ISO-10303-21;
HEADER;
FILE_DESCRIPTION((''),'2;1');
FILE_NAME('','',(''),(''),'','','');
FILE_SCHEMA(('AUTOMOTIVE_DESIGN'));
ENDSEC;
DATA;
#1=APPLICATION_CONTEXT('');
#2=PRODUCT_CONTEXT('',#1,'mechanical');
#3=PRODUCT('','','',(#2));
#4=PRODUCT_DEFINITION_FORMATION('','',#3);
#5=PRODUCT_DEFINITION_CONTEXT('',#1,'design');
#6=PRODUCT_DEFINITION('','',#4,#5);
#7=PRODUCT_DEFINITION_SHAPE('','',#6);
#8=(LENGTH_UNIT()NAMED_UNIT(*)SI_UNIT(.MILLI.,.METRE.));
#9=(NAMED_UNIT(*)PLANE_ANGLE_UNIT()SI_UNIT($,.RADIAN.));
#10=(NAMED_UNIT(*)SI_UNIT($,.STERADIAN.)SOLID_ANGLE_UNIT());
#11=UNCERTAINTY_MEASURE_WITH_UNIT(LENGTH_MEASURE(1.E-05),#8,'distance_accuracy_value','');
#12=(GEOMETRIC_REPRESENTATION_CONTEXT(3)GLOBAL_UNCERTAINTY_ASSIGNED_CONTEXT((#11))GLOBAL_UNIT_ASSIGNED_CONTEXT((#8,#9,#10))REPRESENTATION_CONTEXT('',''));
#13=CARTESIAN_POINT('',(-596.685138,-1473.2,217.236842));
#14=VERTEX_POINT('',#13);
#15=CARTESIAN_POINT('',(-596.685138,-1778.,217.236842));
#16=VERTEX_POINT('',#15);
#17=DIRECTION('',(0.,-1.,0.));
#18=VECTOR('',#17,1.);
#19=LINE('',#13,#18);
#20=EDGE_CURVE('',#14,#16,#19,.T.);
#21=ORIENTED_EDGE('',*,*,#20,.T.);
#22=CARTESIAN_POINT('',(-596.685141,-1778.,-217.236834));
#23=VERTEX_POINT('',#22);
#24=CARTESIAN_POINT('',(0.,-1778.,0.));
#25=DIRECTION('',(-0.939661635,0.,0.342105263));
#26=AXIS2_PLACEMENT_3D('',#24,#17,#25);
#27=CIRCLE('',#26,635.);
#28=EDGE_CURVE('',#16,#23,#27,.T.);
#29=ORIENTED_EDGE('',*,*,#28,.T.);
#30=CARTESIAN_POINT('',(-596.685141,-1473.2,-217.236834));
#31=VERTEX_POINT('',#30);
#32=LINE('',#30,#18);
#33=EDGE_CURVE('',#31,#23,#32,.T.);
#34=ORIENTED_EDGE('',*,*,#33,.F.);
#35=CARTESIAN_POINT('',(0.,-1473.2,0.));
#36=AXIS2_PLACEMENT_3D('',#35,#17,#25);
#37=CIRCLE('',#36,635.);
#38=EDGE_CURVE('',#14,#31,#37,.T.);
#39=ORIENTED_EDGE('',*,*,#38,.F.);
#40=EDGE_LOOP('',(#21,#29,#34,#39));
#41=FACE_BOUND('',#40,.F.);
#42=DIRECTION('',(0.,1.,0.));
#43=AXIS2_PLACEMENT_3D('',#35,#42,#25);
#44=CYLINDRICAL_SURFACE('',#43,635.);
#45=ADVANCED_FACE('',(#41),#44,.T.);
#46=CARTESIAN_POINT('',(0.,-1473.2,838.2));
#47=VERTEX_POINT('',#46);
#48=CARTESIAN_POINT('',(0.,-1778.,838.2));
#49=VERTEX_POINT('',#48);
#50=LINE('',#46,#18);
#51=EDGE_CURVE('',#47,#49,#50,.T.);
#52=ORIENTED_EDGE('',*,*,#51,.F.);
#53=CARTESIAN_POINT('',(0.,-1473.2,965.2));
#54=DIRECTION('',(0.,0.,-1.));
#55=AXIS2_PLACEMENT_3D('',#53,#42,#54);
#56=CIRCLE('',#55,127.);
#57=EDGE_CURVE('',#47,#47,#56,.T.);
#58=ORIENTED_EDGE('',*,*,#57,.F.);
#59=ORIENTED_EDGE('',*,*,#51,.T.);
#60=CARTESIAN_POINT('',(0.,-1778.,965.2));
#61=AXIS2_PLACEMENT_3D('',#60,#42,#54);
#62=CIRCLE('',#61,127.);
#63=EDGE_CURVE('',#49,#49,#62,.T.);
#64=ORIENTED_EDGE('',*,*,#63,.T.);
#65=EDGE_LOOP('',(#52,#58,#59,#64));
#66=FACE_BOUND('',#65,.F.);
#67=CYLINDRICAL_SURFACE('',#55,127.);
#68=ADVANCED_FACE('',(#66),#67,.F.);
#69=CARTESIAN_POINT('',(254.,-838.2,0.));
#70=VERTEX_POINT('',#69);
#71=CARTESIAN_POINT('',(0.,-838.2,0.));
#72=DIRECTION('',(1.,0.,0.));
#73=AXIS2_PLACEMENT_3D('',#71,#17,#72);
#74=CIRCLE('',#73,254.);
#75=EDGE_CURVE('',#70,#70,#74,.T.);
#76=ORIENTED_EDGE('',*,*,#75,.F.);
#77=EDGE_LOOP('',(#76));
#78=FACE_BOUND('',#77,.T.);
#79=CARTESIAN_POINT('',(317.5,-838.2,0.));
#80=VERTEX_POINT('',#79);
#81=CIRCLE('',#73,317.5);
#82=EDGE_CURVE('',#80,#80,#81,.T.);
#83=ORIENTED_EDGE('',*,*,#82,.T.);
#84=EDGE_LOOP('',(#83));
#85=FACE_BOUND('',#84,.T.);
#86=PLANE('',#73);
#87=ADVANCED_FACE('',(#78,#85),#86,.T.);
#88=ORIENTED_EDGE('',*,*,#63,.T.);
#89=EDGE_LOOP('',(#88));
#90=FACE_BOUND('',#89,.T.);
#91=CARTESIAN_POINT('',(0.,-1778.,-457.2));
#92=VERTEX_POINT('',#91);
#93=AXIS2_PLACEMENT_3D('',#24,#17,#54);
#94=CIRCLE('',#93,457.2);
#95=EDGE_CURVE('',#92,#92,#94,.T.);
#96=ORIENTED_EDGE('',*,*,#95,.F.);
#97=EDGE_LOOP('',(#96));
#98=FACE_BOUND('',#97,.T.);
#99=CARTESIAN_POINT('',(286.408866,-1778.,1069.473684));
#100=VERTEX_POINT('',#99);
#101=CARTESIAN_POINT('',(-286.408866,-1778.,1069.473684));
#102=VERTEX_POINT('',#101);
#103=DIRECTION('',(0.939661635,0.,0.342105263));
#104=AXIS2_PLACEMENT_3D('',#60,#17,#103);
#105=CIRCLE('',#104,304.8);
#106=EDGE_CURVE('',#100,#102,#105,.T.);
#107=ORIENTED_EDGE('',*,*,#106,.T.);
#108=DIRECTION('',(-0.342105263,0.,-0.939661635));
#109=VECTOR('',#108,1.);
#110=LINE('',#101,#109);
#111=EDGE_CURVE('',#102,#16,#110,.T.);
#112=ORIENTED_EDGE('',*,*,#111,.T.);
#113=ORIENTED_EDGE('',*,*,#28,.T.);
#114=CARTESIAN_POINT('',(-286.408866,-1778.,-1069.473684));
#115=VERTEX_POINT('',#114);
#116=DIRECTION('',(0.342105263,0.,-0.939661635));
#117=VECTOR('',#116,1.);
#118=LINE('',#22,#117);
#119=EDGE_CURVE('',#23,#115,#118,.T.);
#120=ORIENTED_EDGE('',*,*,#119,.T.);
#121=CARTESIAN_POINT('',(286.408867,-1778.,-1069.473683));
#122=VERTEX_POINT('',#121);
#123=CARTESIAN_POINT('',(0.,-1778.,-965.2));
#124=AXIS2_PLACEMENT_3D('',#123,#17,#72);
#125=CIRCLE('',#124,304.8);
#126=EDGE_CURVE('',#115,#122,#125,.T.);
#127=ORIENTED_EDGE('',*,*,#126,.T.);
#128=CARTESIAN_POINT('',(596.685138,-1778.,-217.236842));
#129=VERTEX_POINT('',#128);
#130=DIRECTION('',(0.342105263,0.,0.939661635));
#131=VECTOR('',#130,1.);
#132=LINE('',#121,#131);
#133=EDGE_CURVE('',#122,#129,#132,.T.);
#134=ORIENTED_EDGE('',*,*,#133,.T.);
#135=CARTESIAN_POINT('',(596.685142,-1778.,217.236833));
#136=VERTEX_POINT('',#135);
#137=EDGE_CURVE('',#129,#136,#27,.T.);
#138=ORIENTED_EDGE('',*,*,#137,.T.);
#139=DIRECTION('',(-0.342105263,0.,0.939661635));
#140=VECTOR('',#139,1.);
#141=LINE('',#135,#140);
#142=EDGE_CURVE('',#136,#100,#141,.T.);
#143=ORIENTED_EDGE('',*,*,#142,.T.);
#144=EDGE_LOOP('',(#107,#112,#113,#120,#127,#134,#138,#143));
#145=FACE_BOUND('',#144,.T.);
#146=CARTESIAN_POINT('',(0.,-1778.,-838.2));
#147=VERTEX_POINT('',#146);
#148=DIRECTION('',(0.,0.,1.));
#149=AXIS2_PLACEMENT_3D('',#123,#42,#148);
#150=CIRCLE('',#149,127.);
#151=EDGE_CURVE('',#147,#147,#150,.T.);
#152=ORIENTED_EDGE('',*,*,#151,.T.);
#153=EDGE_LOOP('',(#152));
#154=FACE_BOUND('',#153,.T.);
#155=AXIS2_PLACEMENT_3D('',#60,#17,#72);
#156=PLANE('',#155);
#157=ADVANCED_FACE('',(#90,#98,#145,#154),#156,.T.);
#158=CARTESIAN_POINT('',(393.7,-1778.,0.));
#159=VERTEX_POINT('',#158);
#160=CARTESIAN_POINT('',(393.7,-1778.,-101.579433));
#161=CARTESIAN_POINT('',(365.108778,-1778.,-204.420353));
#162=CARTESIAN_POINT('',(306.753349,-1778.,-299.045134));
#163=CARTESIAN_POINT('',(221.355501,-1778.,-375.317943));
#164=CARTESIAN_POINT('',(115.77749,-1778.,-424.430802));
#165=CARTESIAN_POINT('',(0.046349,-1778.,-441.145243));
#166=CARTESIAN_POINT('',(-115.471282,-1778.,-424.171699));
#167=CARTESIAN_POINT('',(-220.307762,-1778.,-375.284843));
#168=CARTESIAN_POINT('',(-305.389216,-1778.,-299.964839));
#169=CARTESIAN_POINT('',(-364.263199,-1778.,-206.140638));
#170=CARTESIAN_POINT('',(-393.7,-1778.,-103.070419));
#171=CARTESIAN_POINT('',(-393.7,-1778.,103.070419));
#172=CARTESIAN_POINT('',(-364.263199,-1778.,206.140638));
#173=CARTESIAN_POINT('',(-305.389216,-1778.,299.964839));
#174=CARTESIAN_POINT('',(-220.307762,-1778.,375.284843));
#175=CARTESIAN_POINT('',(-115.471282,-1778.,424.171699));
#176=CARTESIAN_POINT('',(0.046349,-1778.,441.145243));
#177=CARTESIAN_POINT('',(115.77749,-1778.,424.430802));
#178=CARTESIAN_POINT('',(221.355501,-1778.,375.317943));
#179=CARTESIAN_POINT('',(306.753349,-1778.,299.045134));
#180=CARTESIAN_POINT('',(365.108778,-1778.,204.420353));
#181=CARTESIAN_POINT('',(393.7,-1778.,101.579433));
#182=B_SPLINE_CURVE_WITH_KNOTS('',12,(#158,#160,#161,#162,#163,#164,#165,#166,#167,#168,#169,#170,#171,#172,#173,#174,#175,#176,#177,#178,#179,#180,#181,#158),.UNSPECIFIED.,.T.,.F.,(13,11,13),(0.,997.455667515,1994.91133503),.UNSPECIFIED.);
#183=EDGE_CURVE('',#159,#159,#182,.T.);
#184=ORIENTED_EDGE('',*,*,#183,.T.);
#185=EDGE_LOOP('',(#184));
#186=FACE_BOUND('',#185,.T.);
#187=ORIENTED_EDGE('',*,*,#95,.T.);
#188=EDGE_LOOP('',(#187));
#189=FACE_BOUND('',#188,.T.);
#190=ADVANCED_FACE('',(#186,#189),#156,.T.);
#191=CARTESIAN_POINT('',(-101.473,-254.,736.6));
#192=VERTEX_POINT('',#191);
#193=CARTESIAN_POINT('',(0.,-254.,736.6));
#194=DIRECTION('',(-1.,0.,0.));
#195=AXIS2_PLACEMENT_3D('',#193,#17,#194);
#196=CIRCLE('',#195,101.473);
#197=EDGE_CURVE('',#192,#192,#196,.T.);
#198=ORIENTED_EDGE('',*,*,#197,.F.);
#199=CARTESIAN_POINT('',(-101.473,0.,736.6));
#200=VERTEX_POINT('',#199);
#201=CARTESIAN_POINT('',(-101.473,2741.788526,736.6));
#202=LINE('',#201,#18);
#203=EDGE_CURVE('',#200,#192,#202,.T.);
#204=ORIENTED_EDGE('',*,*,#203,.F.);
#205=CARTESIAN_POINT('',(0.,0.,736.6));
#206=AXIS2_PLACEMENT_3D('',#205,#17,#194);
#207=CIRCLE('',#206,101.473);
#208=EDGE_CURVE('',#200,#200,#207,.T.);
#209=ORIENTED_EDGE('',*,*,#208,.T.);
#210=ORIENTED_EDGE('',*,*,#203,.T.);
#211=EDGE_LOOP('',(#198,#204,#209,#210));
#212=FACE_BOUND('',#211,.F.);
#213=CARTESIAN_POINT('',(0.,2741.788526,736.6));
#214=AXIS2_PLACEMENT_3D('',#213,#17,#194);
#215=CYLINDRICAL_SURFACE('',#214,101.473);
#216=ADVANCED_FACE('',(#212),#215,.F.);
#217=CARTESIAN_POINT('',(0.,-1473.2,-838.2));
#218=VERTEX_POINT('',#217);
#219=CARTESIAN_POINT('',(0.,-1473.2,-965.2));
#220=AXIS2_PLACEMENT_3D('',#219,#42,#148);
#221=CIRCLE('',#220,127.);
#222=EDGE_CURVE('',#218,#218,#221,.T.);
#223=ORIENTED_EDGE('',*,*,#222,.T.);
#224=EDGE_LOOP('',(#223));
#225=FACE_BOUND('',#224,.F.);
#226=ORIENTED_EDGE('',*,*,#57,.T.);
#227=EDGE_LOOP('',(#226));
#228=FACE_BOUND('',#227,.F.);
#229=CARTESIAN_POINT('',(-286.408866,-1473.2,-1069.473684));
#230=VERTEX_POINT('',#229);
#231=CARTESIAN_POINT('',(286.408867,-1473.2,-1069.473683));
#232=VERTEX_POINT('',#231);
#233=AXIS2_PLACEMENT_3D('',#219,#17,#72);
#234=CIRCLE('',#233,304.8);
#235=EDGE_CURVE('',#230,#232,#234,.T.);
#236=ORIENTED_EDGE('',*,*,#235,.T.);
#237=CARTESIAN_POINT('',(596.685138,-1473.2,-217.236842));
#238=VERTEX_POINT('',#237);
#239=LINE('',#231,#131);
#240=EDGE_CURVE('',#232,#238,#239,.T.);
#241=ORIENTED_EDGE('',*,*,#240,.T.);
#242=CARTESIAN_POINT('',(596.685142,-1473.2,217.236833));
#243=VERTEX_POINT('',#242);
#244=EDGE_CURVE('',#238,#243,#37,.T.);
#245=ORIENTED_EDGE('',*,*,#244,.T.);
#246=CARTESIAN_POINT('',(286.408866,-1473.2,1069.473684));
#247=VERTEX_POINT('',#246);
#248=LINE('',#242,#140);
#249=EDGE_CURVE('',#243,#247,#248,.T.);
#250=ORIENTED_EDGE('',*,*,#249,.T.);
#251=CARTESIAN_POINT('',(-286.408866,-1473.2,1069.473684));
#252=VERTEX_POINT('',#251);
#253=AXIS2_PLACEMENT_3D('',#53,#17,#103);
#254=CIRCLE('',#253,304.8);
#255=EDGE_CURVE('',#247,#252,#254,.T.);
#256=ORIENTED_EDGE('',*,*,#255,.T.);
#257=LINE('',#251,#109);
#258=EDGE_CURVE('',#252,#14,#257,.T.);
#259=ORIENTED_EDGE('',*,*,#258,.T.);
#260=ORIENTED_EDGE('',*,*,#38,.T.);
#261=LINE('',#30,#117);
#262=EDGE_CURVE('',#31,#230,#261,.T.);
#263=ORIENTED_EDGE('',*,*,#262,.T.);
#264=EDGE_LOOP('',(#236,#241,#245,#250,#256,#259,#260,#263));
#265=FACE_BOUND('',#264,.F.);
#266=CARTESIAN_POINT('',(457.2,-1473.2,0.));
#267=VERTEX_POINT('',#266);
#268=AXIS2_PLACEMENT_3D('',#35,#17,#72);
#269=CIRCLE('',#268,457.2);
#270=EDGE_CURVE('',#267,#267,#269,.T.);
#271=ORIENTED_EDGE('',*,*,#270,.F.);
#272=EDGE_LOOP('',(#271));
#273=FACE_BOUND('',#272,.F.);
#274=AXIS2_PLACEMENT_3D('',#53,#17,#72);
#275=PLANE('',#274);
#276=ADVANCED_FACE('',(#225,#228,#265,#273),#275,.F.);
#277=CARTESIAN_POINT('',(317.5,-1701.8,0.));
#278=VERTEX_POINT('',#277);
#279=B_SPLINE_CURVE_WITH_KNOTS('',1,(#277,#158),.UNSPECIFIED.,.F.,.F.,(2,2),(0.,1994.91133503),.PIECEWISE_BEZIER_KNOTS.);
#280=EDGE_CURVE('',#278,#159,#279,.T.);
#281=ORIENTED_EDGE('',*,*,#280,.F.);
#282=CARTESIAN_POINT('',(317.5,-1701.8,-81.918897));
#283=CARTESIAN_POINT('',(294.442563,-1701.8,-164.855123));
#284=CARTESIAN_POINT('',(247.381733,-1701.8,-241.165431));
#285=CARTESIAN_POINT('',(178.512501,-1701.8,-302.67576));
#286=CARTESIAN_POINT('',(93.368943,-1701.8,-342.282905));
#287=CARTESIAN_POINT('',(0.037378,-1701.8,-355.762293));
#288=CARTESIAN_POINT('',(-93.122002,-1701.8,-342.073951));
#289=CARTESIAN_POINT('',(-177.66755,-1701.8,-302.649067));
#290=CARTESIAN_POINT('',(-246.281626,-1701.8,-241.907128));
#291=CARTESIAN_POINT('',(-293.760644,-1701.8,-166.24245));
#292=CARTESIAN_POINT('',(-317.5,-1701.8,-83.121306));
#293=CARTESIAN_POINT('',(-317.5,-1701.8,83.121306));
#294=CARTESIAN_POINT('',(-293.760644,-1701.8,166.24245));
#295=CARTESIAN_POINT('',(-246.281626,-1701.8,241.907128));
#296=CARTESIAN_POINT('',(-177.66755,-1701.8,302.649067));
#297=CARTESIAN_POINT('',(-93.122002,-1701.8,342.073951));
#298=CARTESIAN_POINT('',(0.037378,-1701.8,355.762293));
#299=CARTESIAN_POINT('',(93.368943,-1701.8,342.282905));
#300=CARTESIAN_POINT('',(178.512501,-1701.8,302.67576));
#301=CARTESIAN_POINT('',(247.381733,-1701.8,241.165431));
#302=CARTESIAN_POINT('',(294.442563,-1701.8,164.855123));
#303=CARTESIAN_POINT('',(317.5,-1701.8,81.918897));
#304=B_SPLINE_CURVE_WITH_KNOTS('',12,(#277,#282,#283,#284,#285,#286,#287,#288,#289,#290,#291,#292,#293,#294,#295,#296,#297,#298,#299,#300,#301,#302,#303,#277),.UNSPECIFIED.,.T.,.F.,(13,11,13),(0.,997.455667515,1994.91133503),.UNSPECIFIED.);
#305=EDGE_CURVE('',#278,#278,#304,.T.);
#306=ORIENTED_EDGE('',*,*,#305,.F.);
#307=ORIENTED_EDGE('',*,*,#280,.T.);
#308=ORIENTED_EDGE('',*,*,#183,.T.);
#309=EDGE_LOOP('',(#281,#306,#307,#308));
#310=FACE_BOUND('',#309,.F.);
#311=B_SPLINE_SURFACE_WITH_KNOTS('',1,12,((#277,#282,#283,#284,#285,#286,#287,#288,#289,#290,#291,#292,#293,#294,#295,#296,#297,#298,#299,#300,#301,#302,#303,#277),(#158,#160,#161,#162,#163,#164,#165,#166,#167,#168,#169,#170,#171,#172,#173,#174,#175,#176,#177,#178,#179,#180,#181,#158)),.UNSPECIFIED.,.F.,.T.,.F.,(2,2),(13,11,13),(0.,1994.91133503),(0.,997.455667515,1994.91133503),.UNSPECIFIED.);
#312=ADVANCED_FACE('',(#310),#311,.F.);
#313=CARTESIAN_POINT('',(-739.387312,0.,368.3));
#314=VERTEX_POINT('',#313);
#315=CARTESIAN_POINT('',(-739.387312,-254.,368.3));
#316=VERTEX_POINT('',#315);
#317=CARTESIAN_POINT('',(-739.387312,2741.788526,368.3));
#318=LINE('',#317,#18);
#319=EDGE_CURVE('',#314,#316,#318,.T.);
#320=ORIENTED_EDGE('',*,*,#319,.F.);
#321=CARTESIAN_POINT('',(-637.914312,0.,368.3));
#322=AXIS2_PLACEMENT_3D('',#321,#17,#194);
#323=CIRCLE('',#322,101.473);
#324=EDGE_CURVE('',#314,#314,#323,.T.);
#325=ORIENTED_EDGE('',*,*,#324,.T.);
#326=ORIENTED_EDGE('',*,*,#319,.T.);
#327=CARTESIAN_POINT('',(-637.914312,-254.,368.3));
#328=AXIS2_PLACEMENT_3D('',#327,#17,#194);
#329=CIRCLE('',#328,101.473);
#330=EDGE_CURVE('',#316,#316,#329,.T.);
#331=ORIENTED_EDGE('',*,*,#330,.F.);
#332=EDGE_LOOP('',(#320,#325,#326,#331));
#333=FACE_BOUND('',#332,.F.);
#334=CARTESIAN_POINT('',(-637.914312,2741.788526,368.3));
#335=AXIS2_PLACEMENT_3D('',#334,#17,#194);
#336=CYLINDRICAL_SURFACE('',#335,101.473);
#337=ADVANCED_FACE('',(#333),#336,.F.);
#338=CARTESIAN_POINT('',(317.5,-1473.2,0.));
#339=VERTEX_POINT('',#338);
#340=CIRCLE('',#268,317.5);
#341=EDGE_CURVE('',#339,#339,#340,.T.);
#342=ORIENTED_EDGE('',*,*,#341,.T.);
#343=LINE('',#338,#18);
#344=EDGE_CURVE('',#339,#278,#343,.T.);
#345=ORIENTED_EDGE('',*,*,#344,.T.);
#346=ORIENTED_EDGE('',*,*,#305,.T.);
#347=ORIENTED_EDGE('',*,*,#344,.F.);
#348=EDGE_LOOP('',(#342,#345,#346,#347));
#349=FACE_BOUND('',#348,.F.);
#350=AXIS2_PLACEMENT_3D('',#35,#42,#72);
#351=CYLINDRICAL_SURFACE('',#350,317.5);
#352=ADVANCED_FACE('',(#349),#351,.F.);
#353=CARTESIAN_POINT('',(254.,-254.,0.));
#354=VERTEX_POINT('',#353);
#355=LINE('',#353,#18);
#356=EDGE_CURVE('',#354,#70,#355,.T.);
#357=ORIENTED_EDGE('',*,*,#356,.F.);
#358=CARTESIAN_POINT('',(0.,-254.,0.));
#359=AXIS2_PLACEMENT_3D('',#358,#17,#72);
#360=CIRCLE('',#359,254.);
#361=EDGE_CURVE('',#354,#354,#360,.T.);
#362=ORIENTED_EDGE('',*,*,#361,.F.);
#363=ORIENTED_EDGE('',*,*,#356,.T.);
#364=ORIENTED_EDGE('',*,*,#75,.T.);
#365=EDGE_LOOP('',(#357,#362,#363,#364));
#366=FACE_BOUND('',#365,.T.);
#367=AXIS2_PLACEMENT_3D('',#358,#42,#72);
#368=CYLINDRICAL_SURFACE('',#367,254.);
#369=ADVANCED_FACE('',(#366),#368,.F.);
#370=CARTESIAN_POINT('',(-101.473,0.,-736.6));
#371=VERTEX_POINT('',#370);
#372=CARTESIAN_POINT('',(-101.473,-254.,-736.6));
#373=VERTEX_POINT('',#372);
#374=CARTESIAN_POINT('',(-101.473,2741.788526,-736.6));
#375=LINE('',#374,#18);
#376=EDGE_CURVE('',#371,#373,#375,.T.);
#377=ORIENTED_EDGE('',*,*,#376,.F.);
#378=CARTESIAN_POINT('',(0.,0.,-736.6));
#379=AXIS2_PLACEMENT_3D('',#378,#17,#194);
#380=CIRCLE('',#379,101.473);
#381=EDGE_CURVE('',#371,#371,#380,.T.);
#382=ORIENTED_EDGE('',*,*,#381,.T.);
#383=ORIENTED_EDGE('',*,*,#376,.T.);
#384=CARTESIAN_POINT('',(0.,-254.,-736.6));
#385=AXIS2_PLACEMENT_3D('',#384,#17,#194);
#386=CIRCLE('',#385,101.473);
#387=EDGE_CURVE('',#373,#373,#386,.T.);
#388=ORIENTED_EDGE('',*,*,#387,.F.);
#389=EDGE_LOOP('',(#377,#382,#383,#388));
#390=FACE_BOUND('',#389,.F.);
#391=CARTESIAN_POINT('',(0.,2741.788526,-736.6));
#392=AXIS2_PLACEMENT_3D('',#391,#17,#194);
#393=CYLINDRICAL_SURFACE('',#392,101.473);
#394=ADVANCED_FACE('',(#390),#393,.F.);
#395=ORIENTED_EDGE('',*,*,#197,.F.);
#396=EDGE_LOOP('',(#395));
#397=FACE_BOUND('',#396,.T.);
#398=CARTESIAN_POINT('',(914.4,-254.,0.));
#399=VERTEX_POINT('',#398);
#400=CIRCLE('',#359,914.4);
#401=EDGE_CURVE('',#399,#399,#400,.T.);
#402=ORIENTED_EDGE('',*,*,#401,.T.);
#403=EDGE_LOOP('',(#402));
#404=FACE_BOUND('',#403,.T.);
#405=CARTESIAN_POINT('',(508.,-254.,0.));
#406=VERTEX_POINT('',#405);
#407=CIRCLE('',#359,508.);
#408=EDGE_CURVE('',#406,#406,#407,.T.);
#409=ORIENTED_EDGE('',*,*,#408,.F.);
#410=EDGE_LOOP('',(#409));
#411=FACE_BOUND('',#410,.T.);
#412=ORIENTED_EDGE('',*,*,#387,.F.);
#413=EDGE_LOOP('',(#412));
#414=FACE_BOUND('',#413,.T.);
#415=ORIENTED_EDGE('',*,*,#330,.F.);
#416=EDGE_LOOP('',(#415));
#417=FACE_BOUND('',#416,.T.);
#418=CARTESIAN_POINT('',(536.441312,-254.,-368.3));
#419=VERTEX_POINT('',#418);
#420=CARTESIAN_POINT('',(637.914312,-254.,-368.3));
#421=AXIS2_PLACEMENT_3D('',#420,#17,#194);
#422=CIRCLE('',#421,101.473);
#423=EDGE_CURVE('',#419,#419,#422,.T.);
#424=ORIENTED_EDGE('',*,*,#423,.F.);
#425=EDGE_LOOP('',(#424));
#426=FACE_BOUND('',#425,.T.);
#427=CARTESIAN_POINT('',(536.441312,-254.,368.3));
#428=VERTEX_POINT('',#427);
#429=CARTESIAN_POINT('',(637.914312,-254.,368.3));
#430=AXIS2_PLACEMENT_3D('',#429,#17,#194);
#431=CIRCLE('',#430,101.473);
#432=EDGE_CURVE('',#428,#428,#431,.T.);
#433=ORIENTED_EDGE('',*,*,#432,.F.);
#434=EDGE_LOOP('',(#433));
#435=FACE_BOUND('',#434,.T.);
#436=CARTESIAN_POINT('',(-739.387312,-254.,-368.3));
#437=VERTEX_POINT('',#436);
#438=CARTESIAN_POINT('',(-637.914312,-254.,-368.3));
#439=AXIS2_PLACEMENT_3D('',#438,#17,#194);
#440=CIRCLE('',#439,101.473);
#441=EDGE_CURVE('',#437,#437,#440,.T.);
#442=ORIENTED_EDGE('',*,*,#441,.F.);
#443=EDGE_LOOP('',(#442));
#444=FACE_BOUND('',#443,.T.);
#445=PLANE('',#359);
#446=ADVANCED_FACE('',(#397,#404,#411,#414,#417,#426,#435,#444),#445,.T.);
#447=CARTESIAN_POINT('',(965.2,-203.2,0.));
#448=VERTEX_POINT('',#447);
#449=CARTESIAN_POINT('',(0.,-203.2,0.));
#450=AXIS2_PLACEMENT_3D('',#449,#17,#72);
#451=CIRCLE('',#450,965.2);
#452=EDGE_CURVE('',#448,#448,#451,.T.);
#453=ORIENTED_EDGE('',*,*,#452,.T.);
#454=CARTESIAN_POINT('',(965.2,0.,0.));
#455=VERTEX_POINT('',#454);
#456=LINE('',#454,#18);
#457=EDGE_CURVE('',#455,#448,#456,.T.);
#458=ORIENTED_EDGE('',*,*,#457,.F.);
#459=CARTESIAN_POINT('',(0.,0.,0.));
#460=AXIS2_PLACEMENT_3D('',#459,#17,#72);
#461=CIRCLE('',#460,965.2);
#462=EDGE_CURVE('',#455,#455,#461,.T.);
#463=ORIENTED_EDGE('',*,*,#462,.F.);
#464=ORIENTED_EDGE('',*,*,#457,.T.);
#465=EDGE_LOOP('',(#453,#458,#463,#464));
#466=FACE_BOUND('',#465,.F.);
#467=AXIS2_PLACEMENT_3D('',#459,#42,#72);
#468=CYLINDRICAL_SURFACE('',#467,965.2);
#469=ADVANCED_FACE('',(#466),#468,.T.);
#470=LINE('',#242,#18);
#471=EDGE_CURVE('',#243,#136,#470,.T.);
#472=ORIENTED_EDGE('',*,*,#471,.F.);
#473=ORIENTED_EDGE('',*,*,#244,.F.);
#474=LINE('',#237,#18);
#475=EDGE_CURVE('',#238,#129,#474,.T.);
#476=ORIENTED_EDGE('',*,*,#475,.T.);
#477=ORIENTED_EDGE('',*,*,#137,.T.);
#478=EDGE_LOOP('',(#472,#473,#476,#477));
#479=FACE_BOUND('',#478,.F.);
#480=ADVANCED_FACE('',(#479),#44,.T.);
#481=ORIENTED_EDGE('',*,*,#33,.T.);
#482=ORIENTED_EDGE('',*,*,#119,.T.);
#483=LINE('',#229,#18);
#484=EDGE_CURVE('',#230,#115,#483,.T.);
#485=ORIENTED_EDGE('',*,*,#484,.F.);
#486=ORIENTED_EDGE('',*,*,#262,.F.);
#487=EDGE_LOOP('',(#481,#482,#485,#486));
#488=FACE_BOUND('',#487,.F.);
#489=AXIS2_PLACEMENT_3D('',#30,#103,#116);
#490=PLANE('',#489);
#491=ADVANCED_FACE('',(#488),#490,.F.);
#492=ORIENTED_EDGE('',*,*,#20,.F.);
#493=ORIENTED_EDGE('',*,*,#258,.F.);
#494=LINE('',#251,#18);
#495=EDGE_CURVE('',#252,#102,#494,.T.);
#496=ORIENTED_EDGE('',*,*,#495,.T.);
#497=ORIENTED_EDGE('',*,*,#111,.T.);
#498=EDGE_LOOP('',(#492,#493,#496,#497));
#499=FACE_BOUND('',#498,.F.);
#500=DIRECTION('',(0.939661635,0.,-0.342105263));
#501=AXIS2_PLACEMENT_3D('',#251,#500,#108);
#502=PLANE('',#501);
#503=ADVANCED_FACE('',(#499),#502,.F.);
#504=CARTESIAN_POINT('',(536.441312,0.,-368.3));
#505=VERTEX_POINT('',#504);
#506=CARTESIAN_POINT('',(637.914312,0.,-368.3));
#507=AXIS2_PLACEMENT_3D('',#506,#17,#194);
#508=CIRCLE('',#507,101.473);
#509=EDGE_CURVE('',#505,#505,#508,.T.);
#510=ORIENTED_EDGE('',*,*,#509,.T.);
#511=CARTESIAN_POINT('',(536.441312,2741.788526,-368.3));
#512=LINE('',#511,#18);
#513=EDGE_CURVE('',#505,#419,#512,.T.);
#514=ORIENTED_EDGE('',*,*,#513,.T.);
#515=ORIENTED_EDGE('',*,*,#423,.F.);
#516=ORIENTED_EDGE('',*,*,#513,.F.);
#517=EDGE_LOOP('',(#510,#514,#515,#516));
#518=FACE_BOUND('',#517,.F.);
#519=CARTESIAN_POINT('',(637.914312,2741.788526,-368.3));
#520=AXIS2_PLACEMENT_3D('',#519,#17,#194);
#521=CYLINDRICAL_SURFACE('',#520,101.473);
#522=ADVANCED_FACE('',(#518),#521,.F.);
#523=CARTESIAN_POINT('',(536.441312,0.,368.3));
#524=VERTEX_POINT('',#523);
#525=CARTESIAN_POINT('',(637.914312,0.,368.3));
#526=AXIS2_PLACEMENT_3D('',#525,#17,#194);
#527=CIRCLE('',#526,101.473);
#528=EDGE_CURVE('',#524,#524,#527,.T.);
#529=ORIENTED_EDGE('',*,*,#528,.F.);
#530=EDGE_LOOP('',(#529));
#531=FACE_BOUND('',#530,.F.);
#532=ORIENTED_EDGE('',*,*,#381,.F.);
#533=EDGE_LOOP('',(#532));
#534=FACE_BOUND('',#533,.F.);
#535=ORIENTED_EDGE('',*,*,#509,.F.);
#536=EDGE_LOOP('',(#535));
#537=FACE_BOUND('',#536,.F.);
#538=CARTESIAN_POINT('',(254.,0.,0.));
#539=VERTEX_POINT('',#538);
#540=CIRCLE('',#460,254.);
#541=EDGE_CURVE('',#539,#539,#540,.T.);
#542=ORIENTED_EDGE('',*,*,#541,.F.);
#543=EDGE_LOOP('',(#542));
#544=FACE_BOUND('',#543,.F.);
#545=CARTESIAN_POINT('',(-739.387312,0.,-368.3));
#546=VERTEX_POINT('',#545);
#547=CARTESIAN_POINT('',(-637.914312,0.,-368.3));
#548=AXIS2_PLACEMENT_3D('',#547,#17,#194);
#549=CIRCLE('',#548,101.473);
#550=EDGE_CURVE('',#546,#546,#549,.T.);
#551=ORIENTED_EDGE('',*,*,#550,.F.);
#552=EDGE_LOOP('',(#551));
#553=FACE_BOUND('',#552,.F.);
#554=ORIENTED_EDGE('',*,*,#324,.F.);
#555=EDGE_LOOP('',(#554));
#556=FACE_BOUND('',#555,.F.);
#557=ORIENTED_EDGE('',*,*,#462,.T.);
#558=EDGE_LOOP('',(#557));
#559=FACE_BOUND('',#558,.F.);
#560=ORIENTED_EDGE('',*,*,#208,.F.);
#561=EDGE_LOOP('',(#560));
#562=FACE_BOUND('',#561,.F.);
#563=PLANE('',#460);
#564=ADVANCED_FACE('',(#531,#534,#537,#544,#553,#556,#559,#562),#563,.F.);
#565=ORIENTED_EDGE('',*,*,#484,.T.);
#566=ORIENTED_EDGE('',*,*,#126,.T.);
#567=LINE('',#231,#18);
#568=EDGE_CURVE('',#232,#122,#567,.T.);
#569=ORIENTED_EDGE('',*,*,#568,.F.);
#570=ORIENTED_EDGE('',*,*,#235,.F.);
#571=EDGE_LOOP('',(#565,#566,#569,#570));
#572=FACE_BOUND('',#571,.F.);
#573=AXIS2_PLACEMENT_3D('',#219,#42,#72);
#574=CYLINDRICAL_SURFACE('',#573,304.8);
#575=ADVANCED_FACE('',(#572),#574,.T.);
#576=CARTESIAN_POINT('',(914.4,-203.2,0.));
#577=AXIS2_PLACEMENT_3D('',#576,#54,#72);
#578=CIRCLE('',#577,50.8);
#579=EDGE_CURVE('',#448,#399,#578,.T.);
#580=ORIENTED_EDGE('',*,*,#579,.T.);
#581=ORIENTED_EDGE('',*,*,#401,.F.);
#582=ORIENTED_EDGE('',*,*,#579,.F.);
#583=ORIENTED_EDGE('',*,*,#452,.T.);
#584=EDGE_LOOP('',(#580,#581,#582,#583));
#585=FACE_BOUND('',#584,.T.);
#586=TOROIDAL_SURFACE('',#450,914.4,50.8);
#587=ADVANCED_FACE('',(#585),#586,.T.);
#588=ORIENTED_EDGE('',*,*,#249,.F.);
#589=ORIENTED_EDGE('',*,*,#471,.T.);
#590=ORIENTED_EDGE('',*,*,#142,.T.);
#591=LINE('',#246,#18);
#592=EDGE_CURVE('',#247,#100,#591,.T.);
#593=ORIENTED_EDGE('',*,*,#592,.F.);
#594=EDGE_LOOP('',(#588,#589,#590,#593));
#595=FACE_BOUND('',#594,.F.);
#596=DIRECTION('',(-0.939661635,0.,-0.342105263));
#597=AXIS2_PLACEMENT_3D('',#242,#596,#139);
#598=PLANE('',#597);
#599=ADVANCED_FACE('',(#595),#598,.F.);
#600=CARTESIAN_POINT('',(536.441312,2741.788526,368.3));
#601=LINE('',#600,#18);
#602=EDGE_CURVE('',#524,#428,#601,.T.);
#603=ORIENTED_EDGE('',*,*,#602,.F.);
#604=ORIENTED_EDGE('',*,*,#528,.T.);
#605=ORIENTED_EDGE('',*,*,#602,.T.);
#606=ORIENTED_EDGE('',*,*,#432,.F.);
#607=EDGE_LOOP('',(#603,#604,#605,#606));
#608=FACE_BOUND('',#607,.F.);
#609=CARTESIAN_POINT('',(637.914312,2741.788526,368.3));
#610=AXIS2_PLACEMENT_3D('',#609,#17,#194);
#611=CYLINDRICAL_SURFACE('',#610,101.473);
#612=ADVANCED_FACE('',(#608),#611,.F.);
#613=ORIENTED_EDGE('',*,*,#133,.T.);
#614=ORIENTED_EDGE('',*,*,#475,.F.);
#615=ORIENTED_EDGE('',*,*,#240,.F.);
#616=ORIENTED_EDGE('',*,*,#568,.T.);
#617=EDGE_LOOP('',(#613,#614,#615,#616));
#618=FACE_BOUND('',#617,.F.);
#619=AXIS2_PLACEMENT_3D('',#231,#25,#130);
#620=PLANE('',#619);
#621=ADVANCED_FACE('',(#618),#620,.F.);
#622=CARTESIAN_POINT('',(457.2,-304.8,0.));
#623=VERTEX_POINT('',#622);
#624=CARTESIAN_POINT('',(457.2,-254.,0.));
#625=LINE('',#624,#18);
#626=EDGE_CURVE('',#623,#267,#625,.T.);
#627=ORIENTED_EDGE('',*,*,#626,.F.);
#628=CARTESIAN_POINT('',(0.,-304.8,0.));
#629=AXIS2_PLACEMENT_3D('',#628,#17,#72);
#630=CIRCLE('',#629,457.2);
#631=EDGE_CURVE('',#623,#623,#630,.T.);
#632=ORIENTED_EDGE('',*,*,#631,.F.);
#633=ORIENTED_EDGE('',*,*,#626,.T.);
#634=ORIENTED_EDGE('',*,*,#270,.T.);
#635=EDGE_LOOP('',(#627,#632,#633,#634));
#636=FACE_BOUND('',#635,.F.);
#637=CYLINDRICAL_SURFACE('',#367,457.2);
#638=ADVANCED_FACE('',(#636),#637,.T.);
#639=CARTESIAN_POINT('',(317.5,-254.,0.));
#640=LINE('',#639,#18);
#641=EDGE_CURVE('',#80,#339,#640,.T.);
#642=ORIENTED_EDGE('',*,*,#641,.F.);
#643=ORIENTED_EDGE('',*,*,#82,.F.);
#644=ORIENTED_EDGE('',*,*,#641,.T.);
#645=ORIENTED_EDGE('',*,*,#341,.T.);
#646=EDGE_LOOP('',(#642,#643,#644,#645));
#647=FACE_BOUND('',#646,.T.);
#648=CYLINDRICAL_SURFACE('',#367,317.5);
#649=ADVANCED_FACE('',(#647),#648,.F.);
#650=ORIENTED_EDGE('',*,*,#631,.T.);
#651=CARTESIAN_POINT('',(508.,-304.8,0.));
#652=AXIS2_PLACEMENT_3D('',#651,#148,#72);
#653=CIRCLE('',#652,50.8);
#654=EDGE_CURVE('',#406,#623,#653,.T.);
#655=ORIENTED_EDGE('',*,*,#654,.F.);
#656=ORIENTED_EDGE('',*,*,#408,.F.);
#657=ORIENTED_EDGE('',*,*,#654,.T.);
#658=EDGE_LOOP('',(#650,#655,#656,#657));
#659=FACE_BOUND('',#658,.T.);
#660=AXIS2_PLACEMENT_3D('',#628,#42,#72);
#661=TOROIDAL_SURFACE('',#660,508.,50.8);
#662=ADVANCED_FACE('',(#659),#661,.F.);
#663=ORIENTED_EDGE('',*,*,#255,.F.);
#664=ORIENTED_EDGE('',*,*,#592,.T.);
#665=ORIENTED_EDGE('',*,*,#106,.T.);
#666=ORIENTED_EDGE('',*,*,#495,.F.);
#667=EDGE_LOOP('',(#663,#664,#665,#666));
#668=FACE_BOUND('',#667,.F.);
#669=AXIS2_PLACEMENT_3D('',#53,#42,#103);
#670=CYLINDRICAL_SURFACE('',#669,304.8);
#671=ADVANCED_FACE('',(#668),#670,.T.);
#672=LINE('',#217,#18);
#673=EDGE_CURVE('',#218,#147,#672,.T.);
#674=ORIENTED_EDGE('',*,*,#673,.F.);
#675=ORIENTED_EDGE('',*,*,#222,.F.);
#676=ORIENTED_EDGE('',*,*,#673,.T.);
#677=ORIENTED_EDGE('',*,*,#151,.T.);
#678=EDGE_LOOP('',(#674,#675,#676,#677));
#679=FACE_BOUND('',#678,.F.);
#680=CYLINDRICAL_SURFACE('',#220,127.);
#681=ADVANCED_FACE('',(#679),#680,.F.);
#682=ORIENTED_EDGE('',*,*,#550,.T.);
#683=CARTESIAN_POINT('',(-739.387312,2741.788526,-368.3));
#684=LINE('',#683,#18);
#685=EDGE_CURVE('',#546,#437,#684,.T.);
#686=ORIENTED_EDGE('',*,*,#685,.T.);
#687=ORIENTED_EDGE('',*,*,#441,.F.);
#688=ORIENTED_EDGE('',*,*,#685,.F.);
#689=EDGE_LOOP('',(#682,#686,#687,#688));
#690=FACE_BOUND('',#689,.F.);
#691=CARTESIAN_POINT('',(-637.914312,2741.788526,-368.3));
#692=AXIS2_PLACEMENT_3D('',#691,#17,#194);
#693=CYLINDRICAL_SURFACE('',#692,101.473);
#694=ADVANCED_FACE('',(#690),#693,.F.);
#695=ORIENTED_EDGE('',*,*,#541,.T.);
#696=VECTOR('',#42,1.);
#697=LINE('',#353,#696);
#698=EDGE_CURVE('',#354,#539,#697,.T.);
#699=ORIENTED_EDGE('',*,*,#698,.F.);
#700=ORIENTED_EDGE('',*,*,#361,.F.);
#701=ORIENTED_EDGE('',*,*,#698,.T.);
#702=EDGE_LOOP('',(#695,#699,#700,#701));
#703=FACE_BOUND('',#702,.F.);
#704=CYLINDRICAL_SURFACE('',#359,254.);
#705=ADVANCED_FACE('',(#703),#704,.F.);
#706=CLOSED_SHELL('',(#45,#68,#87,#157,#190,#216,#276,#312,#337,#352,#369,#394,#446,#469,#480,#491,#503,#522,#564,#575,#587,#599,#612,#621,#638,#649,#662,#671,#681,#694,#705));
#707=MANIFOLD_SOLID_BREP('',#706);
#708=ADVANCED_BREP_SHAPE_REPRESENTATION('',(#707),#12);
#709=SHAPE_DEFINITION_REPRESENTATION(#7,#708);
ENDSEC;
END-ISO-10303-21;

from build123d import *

# Parameters (mm, degrees)
F0_R      = 965.2
F1_DEPTH  = 254
F2_D      = 202.946
F3_R      = 457.2
F3_R_2    = 317.5
F4_DEPTH  = 1219.2
F5_R      = 50.8
F3_R_3    = 254
F6_DEPTH  = 254.001
F7_DEPTH  = 584.2
F10_DEPTH = 304.8
F11_DEPTH = 304.8
F12_SIZE2 = 76.2
F12_SIZE  = 76.2


# Not quite as in the source:
# - a feature names something its author has since deleted; it is built from what else it names


with BuildPart() as f1:
    # F0 (on Front) → F1 (new body)
    with BuildSketch(Plane.XZ):
        Circle(F0_R)
        with BuildLine():
            ThreePointArc((682.5252094596, 277.017866666), (722.9549188186, 141.1231566967), (736.6, 0))
            ThreePointArc((736.6, 0), (722.9549188186, -141.1231566967), (682.5252094596, -277.017866666))
            ThreePointArc((682.5252094596, -277.017866666), (724.0973360995, -314.4943643214), (739.5143124276, -368.3))
            ThreePointArc((739.5143124276, -368.3), (685.6481824631, -457.9885592004), (581.1671145647, -452.5752367823))
            ThreePointArc((581.1671145647, -452.5752367823), (368.3, -637.9143124276), (101.3580948948, -729.5931034483))
            ThreePointArc((101.3580948949, -729.5931034483), (101.5395057141, -733.0944644715), (101.6, -736.6))
            ThreePointArc((101.6, -736.6), (-3.5055355285, -838.1395057141), (-101.3580948949, -729.5931034483))
            ThreePointArc((-101.3580948948, -729.5931034483), (-368.3, -637.9143124276), (-581.1671145647, -452.5752367823))
            ThreePointArc((-581.1671145647, -452.5752367823), (-725.9024934521, -419.1), (-682.5252094596, -277.017866666))
            ThreePointArc((-682.5252094596, -277.017866666), (-736.6, 0), (-682.5252094596, 277.017866666))
            ThreePointArc((-682.5252094596, 277.017866666), (-725.9024934521, 419.1), (-581.1671145647, 452.5752367823))
            ThreePointArc((-581.1671145647, 452.5752367823), (-368.3, 637.9143124276), (-101.3580948948, 729.5931034483))
            ThreePointArc((-101.3580948949, 729.5931034483), (-3.5055355285, 838.1395057141), (101.6, 736.6))
            ThreePointArc((101.6, 736.6), (101.5395057141, 733.0944644715), (101.3580948949, 729.5931034483))
            ThreePointArc((101.3580948948, 729.5931034483), (368.3, 637.9143124276), (581.1671145647, 452.5752367823))
            ThreePointArc((581.1671145647, 452.5752367823), (685.6481824631, 457.9885592004), (739.5143124276, 368.3))
            ThreePointArc((739.5143124276, 368.3), (724.0973360995, 314.4943643214), (682.5252094596, 277.017866666))
        make_face(mode=Mode.SUBTRACT)
        with BuildLine():
            ThreePointArc((682.5252094596, -277.017866666), (722.9549188186, -141.1231566967), (736.6, 0))
            ThreePointArc((736.6, 0), (722.9549188186, 141.1231566967), (682.5252094596, 277.017866666))
            ThreePointArc((682.5252094596, 277.017866666), (549.9261314031, 317.5), (581.1671145647, 452.5752367823))
            ThreePointArc((581.1671145647, 452.5752367823), (368.3, 637.9143124276), (101.3580948948, 729.5931034483))
            ThreePointArc((101.3580948949, 729.5931034483), (0, 635), (-101.3580948949, 729.5931034483))
            ThreePointArc((-101.3580948948, 729.5931034483), (-368.3, 637.9143124276), (-581.1671145647, 452.5752367823))
            ThreePointArc((-581.1671145647, 452.5752367823), (-548.2257532273, 416.0338700355), (-536.3143124276, 368.3))
            ThreePointArc((-536.3143124276, 368.3), (-584.108676749, 282.1169763282), (-682.5252094596, 277.017866666))
            ThreePointArc((-682.5252094596, 277.017866666), (-736.6, 0), (-682.5252094596, -277.017866666))
            ThreePointArc((-682.5252094596, -277.017866666), (-584.108676749, -282.1169763282), (-536.3143124276, -368.3))
            ThreePointArc((-536.3143124276, -368.3), (-548.2257532273, -416.0338700355), (-581.1671145647, -452.5752367823))
            ThreePointArc((-581.1671145647, -452.5752367823), (-368.3, -637.9143124276), (-101.3580948948, -729.5931034483))
            ThreePointArc((-101.3580948949, -729.5931034483), (0, -635), (101.3580948949, -729.5931034483))
            ThreePointArc((101.3580948948, -729.5931034483), (368.3, -637.9143124276), (581.1671145647, -452.5752367823))
            ThreePointArc((581.1671145647, -452.5752367823), (549.9261314031, -317.5), (682.5252094596, -277.017866666))
        make_face()
        with BuildLine():
            ThreePointArc((-682.5252094596, 277.017866666), (-637.9143124276, 368.3), (-581.1671145647, 452.5752367823))
            ThreePointArc((-581.1671145647, 452.5752367823), (-725.9024934521, 419.1), (-682.5252094596, 277.017866666))
        make_face()
        with BuildLine():
            ThreePointArc((-101.3580948948, 729.5931034483), (0, 736.6), (101.3580948948, 729.5931034483))
            ThreePointArc((101.3580948949, 729.5931034483), (101.5395057141, 733.0944644715), (101.6, 736.6))
            ThreePointArc((101.6, 736.6), (-3.5055355285, 838.1395057141), (-101.3580948949, 729.5931034483))
        make_face()
        with BuildLine():
            ThreePointArc((-682.5252094596, -277.017866666), (-725.9024934521, -419.1), (-581.1671145647, -452.5752367823))
            ThreePointArc((-581.1671145647, -452.5752367823), (-637.9143124276, -368.3), (-682.5252094596, -277.017866666))
        make_face()
        with BuildLine():
            ThreePointArc((101.6, -736.6), (101.5395057141, -733.0944644715), (101.3580948949, -729.5931034483))
            ThreePointArc((101.3580948948, -729.5931034483), (0, -736.6), (-101.3580948948, -729.5931034483))
            ThreePointArc((-101.3580948949, -729.5931034483), (-3.5055355285, -838.1395057141), (101.6, -736.6))
        make_face()
        with BuildLine():
            ThreePointArc((739.5143124276, -368.3), (724.0973360995, -314.4943643214), (682.5252094596, -277.017866666))
            ThreePointArc((682.5252094596, -277.017866666), (637.9143124276, -368.3), (581.1671145647, -452.5752367823))
            ThreePointArc((581.1671145647, -452.5752367823), (685.6481824631, -457.9885592004), (739.5143124276, -368.3))
        make_face()
        with BuildLine():
            ThreePointArc((581.1671145647, 452.5752367823), (637.9143124276, 368.3), (682.5252094596, 277.017866666))
            ThreePointArc((682.5252094596, 277.017866666), (724.0973360995, 314.4943643214), (739.5143124276, 368.3))
            ThreePointArc((739.5143124276, 368.3), (685.6481824631, 457.9885592004), (581.1671145647, 452.5752367823))
        make_face()
        with BuildLine():
            ThreePointArc((-536.3143124276, 368.3), (-548.2257532273, 416.0338700355), (-581.1671145647, 452.5752367823))
            ThreePointArc((-581.1671145647, 452.5752367823), (-637.9143124276, 368.3), (-682.5252094596, 277.017866666))
            ThreePointArc((-682.5252094596, 277.017866666), (-584.108676749, 282.1169763282), (-536.3143124276, 368.3))
        make_face()
        with BuildLine():
            ThreePointArc((-101.3580948949, 729.5931034483), (0, 635), (101.3580948949, 729.5931034483))
            ThreePointArc((101.3580948948, 729.5931034483), (0, 736.6), (-101.3580948948, 729.5931034483))
        make_face()
        with BuildLine():
            ThreePointArc((-682.5252094596, -277.017866666), (-637.9143124276, -368.3), (-581.1671145647, -452.5752367823))
            ThreePointArc((-581.1671145647, -452.5752367823), (-548.2257532273, -416.0338700355), (-536.3143124276, -368.3))
            ThreePointArc((-536.3143124276, -368.3), (-584.108676749, -282.1169763282), (-682.5252094596, -277.017866666))
        make_face()
        with BuildLine():
            ThreePointArc((-101.3580948948, -729.5931034483), (0, -736.6), (101.3580948948, -729.5931034483))
            ThreePointArc((101.3580948949, -729.5931034483), (0, -635), (-101.3580948949, -729.5931034483))
        make_face()
        with BuildLine():
            ThreePointArc((581.1671145647, -452.5752367823), (637.9143124276, -368.3), (682.5252094596, -277.017866666))
            ThreePointArc((682.5252094596, -277.017866666), (549.9261314031, -317.5), (581.1671145647, -452.5752367823))
        make_face()
        with BuildLine():
            ThreePointArc((581.1671145647, 452.5752367823), (549.9261314031, 317.5), (682.5252094596, 277.017866666))
            ThreePointArc((682.5252094596, 277.017866666), (637.9143124276, 368.3), (581.1671145647, 452.5752367823))
        make_face()
    extrude(amount=F1_DEPTH)

    # F2 (through all)
    with Locations(Plane(origin=(0, 0, 0), x_dir=(1, 0, 0), z_dir=(0, 1, 0))):
        with Locations((0, -736.6), (-637.9143124276, -368.3), (-637.9143124276, 368.3), (0, 736.6), (637.9143124276, 368.3), (637.9143124276, -368.3)):
            Hole(F2_D / 2)

    # F3 (on face) → F4 (join)
    with BuildSketch(Plane.XZ.offset(254)):
        Circle(F3_R)
        Circle(F3_R_2, mode=Mode.SUBTRACT)
    extrude(amount=F4_DEPTH)

    # F5
    f5_edges = [f1.edges().sort_by_distance(p)[0] for p in [
        (-965.2, -254, 0),
        (-457.2, -254, 0),
    ]]
    fillet(f5_edges, radius=F5_R)

    # F3 (on face) → F6 (cut, through all)
    with BuildSketch(Plane.XZ.offset(254)):
        Circle(F3_R_3)
    extrude(amount=-F6_DEPTH, mode=Mode.SUBTRACT)

    # F3 (on face) → F7 (join)
    with BuildSketch(Plane.XZ.offset(254)):
        Circle(F3_R_2)
        Circle(F3_R_3, mode=Mode.SUBTRACT)
    extrude(amount=F7_DEPTH)

    # F9 (on face) → F10 (join)
    with BuildSketch(Plane.XZ.offset(1473.2)):
        with BuildLine():
            ThreePointArc((0, 660.4), (215.5261469057, 749.6738530943), (304.8, 965.2))
            ThreePointArc((304.8, 965.2), (300.1670055935, 1018.1415597902), (286.40886645, 1069.4736842105))
            ThreePointArc((286.40886645, 1069.4736842105), (0, 1270), (-286.40886645, 1069.4736842105))
            ThreePointArc((-286.40886645, 1069.4736842105), (-249.6854610779, 790.3852107906), (0, 660.4))
        make_face()
        with BuildLine():
            ThreePointArc((127, 965.2), (89.8025612107, 875.3974387893), (0, 838.2))
            ThreePointArc((0, 838.2), (-89.8025612107, 1055.0025612107), (127, 965.2))
        make_face(mode=Mode.SUBTRACT)
        with BuildLine():
            ThreePointArc((286.40886645, 1069.4736842105), (300.1670055935, 1018.1415597902), (304.8, 965.2))
            ThreePointArc((304.8, 965.2), (215.5261469057, 749.6738530943), (0, 660.4))
            Line((0, 660.4), (0, 635))
            ThreePointArc((0, 635), (364.1974814541, 520.1780411576), (596.6851417238, 217.2368330788))
            Line((596.6851417238, 217.2368330788), (286.40886645, 1069.4736842105))
        make_face()
        with BuildLine():
            Line((0, 635), (0, 660.4))
            ThreePointArc((0, 660.4), (-249.6854610779, 790.3852107906), (-286.40886645, 1069.4736842105))
            Line((-286.40886645, 1069.4736842105), (-596.6851384375, 217.2368421053))
            ThreePointArc((-596.6851384375, 217.2368421053), (-364.1974775195, 520.1780439123), (0, 635))
        make_face()
        with BuildLine():
            ThreePointArc((635, 0), (625.3479291541, 110.2949114996), (596.6851417238, 217.2368330788))
            ThreePointArc((596.6851417238, 217.2368330788), (364.1974814541, 520.1780411576), (0, 635))
            Line((0, 635), (0, 457.2))
            Line((0, 457.2), (0, 330.2))
            ThreePointArc((0, 330.2), (233.4866591478, 233.4866591478), (330.2, 0))
            ThreePointArc((330.2, 0), (233.4866591478, -233.4866591478), (0, -330.2))
            Line((0, -330.2), (0, -635))
            ThreePointArc((0, -635), (364.1974775195, -520.1780439123), (596.6851384375, -217.2368421053))
            ThreePointArc((596.6851384375, -217.2368421053), (625.3479283198, -110.2949162297), (635, 0))
        make_face()
        with BuildLine():
            Line((0, 457.2), (0, 635))
            ThreePointArc((0, 635), (-364.1974775195, 520.1780439123), (-596.6851384375, 217.2368421053))
            ThreePointArc((-596.6851384375, 217.2368421053), (-635, 4.0958e-06), (-596.6851412398, -217.236834408))
            ThreePointArc((-596.6851412398, -217.236834408), (-364.1974808747, -520.1780415632), (0, -635))
            Line((0, -635), (0, -330.2))
            ThreePointArc((0, -330.2), (-233.4866591478, -233.4866591478), (-330.2, 0))
            Line((-330.2, 0), (-457.2, 0))
            ThreePointArc((-457.2, 0), (-323.2892203585, 323.2892203585), (0, 457.2))
        make_face()
        with BuildLine():
            Line((0, 330.2), (0, 457.2))
            ThreePointArc((0, 457.2), (-323.2892203585, 323.2892203585), (-457.2, 0))
            Line((-457.2, 0), (-330.2, 0))
            ThreePointArc((-330.2, 0), (-233.4866591478, 233.4866591478), (0, 330.2))
        make_face()
        with BuildLine():
            ThreePointArc((0, -635), (-364.1974808747, -520.1780415632), (-596.6851412398, -217.236834408))
            Line((-596.6851412398, -217.236834408), (-286.40886645, -1069.4736842105))
            ThreePointArc((-286.40886645, -1069.4736842105), (-249.6854610779, -790.3852107906), (0, -660.4))
            Line((0, -660.4), (0, -635))
        make_face()
        with BuildLine():
            Line((286.4088669044, -1069.4736829624), (596.6851384375, -217.2368421053))
            ThreePointArc((596.6851384375, -217.2368421053), (364.1974775195, -520.1780439123), (0, -635))
            Line((0, -635), (0, -660.4))
            ThreePointArc((0, -660.4), (215.5261469057, -749.6738530943), (304.8, -965.2))
            ThreePointArc((304.8, -965.2), (300.1670057089, -1018.1415591362), (286.4088669044, -1069.4736829624))
        make_face()
        with BuildLine():
            ThreePointArc((0, -660.4), (-249.6854610779, -790.3852107906), (-286.40886645, -1069.4736842105))
            ThreePointArc((-286.40886645, -1069.4736842105), (6.642e-07, -1270), (286.4088669044, -1069.4736829624))
            ThreePointArc((286.4088669044, -1069.4736829624), (300.1670057089, -1018.1415591362), (304.8, -965.2))
            ThreePointArc((304.8, -965.2), (215.5261469057, -749.6738530943), (0, -660.4))
        make_face()
        with BuildLine():
            ThreePointArc((127, -965.2), (-89.8025612107, -1055.0025612107), (0, -838.2))
            ThreePointArc((0, -838.2), (89.8025612107, -875.3974387893), (127, -965.2))
        make_face(mode=Mode.SUBTRACT)
    extrude(amount=F10_DEPTH)

    # F8 (on face) → F11 (join)
    with BuildSketch(Plane.XZ.offset(1473.2)):
        with BuildLine():
            Line((0, -457.2), (0, -317.5))
            ThreePointArc((0, -317.5), (-224.5064030267, -224.5064030267), (-317.5, 0))
            Line((-317.5, 0), (-457.2, 0))
            ThreePointArc((-457.2, 0), (-323.2892203585, -323.2892203585), (0, -457.2))
        make_face()
        with BuildLine():
            ThreePointArc((-317.5, 0), (-224.5064030267, 224.5064030267), (0, 317.5))
            Line((0, 317.5), (0, 457.2))
            ThreePointArc((0, 457.2), (-323.2892203585, 323.2892203585), (-457.2, 0))
            Line((-457.2, 0), (-317.5, 0))
        make_face()
        with BuildLine():
            Line((0, 457.2), (0, 317.5))
            ThreePointArc((0, 317.5), (224.5064030267, 224.5064030267), (317.5, 0))
            Line((317.5, 0), (457.2, 0))
            ThreePointArc((457.2, 0), (323.2892203585, 323.2892203585), (0, 457.2))
        make_face()
        with BuildLine():
            ThreePointArc((317.5, 0), (224.5064030267, -224.5064030267), (0, -317.5))
            Line((0, -317.5), (0, -457.2))
            ThreePointArc((0, -457.2), (323.2892203585, -323.2892203585), (457.2, 0))
            Line((457.2, 0), (317.5, 0))
        make_face()
    extrude(amount=F11_DEPTH)

    # F12
    f12_edges = [f1.edges().sort_by_distance(p)[0] for p in [
        (-317.5, -1778, 0),
    ]]
    chamfer(f12_edges, length=F12_SIZE, length2=F12_SIZE2)


solid = f1.part
